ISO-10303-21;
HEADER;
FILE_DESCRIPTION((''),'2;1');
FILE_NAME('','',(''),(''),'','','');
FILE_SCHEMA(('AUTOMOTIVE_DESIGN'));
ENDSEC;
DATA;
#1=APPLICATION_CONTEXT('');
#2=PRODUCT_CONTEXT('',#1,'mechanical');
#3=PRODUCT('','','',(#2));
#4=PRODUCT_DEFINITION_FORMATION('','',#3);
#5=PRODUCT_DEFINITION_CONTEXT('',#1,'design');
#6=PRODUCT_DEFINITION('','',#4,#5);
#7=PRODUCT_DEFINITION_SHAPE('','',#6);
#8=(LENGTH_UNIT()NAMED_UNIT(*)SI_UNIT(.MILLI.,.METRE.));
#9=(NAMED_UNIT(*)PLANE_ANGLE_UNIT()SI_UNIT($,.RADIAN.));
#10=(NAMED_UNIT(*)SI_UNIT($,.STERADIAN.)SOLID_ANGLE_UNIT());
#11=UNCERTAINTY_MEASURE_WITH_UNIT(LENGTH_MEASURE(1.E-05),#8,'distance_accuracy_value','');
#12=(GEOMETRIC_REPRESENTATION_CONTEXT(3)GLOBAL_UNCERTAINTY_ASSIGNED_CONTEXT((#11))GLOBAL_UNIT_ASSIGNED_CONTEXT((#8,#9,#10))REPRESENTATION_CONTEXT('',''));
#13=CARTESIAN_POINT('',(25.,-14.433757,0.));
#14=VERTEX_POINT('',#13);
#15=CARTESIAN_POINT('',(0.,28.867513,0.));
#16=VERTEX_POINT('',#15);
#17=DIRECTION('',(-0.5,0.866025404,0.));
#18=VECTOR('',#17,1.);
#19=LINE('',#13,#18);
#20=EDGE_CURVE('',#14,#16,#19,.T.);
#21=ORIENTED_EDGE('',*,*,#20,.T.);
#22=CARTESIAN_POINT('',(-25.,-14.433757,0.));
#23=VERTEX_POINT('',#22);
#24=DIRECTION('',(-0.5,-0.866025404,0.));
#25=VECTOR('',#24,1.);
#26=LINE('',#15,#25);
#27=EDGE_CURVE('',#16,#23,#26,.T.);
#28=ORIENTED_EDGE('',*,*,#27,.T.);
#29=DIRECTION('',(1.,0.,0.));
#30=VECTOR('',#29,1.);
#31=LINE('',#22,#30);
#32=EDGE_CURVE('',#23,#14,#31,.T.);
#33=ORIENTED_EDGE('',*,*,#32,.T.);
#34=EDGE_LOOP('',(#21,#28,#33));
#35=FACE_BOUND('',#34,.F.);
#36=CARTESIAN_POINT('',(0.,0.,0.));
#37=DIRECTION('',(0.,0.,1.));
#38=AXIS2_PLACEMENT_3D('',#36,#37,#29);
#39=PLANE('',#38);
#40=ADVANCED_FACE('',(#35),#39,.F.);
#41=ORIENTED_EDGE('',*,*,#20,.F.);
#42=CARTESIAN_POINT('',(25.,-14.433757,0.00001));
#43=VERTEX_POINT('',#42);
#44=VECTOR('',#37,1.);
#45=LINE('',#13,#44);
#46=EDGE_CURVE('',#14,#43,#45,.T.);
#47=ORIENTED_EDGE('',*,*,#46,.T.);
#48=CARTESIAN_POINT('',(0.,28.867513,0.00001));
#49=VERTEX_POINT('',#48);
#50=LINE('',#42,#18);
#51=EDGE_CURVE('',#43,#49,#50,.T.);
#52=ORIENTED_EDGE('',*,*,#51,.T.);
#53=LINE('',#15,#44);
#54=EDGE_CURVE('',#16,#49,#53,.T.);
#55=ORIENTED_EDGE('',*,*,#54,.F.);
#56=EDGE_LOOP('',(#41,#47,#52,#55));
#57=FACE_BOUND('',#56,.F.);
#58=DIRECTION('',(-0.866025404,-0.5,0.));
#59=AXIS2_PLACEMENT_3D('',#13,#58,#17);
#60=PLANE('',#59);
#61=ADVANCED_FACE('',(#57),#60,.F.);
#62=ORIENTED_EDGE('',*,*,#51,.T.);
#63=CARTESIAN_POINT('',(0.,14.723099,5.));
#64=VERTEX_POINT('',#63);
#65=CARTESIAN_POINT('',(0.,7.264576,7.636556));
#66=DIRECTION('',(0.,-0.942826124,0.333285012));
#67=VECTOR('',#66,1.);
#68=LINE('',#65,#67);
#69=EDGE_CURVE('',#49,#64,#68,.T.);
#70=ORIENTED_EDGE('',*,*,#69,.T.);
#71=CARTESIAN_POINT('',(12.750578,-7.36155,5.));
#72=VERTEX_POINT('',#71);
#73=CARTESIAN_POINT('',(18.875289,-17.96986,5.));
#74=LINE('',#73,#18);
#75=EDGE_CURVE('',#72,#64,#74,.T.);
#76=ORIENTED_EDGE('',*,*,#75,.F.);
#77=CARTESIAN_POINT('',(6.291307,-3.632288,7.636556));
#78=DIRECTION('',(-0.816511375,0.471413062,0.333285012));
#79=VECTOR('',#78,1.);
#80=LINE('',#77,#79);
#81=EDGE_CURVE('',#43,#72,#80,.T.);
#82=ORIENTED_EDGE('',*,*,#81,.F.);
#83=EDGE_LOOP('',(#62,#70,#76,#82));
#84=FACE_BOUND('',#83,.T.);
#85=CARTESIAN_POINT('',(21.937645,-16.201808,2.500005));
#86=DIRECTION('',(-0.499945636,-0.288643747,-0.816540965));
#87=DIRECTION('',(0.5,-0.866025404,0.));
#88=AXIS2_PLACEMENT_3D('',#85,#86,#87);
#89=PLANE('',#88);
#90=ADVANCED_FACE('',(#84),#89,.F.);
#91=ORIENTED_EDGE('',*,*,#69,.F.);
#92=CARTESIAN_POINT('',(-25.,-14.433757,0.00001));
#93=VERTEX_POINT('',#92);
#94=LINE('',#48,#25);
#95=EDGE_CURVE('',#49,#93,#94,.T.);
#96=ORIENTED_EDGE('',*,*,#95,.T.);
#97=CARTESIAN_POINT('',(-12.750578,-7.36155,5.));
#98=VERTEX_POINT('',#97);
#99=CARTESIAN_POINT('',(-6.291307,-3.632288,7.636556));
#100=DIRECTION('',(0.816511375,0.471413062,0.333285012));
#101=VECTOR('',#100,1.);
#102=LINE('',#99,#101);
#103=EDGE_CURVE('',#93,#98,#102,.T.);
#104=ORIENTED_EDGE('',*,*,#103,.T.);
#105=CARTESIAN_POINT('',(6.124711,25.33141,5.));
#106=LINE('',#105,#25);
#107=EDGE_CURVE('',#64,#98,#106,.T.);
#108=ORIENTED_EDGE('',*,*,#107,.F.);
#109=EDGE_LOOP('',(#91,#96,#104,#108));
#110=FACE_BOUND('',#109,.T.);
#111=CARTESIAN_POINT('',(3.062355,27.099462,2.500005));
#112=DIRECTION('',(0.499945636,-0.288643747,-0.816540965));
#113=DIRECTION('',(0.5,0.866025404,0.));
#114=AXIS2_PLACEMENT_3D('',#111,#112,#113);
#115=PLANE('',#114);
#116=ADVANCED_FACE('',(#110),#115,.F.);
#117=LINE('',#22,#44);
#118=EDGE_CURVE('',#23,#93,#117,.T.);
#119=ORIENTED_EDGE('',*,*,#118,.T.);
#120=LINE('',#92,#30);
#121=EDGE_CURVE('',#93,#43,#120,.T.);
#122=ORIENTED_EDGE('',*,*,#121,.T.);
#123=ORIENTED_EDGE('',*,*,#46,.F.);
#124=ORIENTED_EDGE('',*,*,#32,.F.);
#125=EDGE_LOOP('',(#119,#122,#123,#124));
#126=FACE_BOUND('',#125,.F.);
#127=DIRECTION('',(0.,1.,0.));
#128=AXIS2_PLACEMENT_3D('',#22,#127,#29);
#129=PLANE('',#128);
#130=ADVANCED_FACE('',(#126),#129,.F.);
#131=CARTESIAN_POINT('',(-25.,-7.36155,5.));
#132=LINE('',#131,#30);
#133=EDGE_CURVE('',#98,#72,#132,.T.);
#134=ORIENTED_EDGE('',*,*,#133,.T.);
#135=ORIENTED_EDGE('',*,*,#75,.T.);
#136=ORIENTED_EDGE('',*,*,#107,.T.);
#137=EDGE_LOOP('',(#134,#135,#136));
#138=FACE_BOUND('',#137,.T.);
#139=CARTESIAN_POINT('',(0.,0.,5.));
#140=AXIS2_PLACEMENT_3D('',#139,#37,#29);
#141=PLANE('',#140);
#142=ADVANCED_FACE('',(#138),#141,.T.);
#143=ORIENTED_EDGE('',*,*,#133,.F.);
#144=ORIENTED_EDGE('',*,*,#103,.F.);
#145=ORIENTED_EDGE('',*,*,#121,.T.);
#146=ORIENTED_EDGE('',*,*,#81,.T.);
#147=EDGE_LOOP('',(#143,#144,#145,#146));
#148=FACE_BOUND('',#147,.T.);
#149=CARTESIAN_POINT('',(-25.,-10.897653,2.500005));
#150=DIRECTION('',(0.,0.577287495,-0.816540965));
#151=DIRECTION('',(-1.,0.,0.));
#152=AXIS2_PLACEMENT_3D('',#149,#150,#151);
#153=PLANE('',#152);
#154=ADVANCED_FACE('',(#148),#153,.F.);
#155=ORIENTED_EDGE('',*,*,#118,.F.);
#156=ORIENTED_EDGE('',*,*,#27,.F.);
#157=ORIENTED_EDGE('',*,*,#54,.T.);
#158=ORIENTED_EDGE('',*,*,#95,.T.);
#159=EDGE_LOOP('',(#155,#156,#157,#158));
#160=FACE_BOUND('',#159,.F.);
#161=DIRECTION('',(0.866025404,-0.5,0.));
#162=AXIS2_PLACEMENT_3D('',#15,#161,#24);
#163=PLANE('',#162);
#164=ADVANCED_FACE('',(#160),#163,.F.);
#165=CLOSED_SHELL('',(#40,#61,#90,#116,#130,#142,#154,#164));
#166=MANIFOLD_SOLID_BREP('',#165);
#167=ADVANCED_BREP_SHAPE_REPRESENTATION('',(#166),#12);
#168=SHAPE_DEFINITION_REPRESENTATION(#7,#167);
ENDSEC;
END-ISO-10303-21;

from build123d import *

# Parameters (mm, degrees)
F1_DEPTH = 5
F2_SIZE2 = 7.072207
F2_SIZE  = 4.99999


# Not quite as in the source:
# - a fillet or chamfer is up to 0.001 mm smaller than in the source, because OpenCascade refuses the exact size


with BuildPart() as f1:
    # F0 (on Top) → F1 (new body)
    with BuildSketch(Plane.XY):
        Polygon((0, 28.8675134595), (-25, -14.4337567297), (25, -14.4337567297), align=None)
    extrude(amount=F1_DEPTH)

    # F2 (size 5 and 7.0722171527 in the source; OpenCascade refuses exactly that, so slightly less here)
    f2_edges = [f1.edges().sort_by_distance(p)[0] for p in [
        (-12.5, 7.216878, 5),
        (12.5, 7.216878, 5),
        (0, -14.433757, 5),
    ]]
    chamfer(f2_edges, length=F2_SIZE, length2=F2_SIZE2)


solid = f1.part
